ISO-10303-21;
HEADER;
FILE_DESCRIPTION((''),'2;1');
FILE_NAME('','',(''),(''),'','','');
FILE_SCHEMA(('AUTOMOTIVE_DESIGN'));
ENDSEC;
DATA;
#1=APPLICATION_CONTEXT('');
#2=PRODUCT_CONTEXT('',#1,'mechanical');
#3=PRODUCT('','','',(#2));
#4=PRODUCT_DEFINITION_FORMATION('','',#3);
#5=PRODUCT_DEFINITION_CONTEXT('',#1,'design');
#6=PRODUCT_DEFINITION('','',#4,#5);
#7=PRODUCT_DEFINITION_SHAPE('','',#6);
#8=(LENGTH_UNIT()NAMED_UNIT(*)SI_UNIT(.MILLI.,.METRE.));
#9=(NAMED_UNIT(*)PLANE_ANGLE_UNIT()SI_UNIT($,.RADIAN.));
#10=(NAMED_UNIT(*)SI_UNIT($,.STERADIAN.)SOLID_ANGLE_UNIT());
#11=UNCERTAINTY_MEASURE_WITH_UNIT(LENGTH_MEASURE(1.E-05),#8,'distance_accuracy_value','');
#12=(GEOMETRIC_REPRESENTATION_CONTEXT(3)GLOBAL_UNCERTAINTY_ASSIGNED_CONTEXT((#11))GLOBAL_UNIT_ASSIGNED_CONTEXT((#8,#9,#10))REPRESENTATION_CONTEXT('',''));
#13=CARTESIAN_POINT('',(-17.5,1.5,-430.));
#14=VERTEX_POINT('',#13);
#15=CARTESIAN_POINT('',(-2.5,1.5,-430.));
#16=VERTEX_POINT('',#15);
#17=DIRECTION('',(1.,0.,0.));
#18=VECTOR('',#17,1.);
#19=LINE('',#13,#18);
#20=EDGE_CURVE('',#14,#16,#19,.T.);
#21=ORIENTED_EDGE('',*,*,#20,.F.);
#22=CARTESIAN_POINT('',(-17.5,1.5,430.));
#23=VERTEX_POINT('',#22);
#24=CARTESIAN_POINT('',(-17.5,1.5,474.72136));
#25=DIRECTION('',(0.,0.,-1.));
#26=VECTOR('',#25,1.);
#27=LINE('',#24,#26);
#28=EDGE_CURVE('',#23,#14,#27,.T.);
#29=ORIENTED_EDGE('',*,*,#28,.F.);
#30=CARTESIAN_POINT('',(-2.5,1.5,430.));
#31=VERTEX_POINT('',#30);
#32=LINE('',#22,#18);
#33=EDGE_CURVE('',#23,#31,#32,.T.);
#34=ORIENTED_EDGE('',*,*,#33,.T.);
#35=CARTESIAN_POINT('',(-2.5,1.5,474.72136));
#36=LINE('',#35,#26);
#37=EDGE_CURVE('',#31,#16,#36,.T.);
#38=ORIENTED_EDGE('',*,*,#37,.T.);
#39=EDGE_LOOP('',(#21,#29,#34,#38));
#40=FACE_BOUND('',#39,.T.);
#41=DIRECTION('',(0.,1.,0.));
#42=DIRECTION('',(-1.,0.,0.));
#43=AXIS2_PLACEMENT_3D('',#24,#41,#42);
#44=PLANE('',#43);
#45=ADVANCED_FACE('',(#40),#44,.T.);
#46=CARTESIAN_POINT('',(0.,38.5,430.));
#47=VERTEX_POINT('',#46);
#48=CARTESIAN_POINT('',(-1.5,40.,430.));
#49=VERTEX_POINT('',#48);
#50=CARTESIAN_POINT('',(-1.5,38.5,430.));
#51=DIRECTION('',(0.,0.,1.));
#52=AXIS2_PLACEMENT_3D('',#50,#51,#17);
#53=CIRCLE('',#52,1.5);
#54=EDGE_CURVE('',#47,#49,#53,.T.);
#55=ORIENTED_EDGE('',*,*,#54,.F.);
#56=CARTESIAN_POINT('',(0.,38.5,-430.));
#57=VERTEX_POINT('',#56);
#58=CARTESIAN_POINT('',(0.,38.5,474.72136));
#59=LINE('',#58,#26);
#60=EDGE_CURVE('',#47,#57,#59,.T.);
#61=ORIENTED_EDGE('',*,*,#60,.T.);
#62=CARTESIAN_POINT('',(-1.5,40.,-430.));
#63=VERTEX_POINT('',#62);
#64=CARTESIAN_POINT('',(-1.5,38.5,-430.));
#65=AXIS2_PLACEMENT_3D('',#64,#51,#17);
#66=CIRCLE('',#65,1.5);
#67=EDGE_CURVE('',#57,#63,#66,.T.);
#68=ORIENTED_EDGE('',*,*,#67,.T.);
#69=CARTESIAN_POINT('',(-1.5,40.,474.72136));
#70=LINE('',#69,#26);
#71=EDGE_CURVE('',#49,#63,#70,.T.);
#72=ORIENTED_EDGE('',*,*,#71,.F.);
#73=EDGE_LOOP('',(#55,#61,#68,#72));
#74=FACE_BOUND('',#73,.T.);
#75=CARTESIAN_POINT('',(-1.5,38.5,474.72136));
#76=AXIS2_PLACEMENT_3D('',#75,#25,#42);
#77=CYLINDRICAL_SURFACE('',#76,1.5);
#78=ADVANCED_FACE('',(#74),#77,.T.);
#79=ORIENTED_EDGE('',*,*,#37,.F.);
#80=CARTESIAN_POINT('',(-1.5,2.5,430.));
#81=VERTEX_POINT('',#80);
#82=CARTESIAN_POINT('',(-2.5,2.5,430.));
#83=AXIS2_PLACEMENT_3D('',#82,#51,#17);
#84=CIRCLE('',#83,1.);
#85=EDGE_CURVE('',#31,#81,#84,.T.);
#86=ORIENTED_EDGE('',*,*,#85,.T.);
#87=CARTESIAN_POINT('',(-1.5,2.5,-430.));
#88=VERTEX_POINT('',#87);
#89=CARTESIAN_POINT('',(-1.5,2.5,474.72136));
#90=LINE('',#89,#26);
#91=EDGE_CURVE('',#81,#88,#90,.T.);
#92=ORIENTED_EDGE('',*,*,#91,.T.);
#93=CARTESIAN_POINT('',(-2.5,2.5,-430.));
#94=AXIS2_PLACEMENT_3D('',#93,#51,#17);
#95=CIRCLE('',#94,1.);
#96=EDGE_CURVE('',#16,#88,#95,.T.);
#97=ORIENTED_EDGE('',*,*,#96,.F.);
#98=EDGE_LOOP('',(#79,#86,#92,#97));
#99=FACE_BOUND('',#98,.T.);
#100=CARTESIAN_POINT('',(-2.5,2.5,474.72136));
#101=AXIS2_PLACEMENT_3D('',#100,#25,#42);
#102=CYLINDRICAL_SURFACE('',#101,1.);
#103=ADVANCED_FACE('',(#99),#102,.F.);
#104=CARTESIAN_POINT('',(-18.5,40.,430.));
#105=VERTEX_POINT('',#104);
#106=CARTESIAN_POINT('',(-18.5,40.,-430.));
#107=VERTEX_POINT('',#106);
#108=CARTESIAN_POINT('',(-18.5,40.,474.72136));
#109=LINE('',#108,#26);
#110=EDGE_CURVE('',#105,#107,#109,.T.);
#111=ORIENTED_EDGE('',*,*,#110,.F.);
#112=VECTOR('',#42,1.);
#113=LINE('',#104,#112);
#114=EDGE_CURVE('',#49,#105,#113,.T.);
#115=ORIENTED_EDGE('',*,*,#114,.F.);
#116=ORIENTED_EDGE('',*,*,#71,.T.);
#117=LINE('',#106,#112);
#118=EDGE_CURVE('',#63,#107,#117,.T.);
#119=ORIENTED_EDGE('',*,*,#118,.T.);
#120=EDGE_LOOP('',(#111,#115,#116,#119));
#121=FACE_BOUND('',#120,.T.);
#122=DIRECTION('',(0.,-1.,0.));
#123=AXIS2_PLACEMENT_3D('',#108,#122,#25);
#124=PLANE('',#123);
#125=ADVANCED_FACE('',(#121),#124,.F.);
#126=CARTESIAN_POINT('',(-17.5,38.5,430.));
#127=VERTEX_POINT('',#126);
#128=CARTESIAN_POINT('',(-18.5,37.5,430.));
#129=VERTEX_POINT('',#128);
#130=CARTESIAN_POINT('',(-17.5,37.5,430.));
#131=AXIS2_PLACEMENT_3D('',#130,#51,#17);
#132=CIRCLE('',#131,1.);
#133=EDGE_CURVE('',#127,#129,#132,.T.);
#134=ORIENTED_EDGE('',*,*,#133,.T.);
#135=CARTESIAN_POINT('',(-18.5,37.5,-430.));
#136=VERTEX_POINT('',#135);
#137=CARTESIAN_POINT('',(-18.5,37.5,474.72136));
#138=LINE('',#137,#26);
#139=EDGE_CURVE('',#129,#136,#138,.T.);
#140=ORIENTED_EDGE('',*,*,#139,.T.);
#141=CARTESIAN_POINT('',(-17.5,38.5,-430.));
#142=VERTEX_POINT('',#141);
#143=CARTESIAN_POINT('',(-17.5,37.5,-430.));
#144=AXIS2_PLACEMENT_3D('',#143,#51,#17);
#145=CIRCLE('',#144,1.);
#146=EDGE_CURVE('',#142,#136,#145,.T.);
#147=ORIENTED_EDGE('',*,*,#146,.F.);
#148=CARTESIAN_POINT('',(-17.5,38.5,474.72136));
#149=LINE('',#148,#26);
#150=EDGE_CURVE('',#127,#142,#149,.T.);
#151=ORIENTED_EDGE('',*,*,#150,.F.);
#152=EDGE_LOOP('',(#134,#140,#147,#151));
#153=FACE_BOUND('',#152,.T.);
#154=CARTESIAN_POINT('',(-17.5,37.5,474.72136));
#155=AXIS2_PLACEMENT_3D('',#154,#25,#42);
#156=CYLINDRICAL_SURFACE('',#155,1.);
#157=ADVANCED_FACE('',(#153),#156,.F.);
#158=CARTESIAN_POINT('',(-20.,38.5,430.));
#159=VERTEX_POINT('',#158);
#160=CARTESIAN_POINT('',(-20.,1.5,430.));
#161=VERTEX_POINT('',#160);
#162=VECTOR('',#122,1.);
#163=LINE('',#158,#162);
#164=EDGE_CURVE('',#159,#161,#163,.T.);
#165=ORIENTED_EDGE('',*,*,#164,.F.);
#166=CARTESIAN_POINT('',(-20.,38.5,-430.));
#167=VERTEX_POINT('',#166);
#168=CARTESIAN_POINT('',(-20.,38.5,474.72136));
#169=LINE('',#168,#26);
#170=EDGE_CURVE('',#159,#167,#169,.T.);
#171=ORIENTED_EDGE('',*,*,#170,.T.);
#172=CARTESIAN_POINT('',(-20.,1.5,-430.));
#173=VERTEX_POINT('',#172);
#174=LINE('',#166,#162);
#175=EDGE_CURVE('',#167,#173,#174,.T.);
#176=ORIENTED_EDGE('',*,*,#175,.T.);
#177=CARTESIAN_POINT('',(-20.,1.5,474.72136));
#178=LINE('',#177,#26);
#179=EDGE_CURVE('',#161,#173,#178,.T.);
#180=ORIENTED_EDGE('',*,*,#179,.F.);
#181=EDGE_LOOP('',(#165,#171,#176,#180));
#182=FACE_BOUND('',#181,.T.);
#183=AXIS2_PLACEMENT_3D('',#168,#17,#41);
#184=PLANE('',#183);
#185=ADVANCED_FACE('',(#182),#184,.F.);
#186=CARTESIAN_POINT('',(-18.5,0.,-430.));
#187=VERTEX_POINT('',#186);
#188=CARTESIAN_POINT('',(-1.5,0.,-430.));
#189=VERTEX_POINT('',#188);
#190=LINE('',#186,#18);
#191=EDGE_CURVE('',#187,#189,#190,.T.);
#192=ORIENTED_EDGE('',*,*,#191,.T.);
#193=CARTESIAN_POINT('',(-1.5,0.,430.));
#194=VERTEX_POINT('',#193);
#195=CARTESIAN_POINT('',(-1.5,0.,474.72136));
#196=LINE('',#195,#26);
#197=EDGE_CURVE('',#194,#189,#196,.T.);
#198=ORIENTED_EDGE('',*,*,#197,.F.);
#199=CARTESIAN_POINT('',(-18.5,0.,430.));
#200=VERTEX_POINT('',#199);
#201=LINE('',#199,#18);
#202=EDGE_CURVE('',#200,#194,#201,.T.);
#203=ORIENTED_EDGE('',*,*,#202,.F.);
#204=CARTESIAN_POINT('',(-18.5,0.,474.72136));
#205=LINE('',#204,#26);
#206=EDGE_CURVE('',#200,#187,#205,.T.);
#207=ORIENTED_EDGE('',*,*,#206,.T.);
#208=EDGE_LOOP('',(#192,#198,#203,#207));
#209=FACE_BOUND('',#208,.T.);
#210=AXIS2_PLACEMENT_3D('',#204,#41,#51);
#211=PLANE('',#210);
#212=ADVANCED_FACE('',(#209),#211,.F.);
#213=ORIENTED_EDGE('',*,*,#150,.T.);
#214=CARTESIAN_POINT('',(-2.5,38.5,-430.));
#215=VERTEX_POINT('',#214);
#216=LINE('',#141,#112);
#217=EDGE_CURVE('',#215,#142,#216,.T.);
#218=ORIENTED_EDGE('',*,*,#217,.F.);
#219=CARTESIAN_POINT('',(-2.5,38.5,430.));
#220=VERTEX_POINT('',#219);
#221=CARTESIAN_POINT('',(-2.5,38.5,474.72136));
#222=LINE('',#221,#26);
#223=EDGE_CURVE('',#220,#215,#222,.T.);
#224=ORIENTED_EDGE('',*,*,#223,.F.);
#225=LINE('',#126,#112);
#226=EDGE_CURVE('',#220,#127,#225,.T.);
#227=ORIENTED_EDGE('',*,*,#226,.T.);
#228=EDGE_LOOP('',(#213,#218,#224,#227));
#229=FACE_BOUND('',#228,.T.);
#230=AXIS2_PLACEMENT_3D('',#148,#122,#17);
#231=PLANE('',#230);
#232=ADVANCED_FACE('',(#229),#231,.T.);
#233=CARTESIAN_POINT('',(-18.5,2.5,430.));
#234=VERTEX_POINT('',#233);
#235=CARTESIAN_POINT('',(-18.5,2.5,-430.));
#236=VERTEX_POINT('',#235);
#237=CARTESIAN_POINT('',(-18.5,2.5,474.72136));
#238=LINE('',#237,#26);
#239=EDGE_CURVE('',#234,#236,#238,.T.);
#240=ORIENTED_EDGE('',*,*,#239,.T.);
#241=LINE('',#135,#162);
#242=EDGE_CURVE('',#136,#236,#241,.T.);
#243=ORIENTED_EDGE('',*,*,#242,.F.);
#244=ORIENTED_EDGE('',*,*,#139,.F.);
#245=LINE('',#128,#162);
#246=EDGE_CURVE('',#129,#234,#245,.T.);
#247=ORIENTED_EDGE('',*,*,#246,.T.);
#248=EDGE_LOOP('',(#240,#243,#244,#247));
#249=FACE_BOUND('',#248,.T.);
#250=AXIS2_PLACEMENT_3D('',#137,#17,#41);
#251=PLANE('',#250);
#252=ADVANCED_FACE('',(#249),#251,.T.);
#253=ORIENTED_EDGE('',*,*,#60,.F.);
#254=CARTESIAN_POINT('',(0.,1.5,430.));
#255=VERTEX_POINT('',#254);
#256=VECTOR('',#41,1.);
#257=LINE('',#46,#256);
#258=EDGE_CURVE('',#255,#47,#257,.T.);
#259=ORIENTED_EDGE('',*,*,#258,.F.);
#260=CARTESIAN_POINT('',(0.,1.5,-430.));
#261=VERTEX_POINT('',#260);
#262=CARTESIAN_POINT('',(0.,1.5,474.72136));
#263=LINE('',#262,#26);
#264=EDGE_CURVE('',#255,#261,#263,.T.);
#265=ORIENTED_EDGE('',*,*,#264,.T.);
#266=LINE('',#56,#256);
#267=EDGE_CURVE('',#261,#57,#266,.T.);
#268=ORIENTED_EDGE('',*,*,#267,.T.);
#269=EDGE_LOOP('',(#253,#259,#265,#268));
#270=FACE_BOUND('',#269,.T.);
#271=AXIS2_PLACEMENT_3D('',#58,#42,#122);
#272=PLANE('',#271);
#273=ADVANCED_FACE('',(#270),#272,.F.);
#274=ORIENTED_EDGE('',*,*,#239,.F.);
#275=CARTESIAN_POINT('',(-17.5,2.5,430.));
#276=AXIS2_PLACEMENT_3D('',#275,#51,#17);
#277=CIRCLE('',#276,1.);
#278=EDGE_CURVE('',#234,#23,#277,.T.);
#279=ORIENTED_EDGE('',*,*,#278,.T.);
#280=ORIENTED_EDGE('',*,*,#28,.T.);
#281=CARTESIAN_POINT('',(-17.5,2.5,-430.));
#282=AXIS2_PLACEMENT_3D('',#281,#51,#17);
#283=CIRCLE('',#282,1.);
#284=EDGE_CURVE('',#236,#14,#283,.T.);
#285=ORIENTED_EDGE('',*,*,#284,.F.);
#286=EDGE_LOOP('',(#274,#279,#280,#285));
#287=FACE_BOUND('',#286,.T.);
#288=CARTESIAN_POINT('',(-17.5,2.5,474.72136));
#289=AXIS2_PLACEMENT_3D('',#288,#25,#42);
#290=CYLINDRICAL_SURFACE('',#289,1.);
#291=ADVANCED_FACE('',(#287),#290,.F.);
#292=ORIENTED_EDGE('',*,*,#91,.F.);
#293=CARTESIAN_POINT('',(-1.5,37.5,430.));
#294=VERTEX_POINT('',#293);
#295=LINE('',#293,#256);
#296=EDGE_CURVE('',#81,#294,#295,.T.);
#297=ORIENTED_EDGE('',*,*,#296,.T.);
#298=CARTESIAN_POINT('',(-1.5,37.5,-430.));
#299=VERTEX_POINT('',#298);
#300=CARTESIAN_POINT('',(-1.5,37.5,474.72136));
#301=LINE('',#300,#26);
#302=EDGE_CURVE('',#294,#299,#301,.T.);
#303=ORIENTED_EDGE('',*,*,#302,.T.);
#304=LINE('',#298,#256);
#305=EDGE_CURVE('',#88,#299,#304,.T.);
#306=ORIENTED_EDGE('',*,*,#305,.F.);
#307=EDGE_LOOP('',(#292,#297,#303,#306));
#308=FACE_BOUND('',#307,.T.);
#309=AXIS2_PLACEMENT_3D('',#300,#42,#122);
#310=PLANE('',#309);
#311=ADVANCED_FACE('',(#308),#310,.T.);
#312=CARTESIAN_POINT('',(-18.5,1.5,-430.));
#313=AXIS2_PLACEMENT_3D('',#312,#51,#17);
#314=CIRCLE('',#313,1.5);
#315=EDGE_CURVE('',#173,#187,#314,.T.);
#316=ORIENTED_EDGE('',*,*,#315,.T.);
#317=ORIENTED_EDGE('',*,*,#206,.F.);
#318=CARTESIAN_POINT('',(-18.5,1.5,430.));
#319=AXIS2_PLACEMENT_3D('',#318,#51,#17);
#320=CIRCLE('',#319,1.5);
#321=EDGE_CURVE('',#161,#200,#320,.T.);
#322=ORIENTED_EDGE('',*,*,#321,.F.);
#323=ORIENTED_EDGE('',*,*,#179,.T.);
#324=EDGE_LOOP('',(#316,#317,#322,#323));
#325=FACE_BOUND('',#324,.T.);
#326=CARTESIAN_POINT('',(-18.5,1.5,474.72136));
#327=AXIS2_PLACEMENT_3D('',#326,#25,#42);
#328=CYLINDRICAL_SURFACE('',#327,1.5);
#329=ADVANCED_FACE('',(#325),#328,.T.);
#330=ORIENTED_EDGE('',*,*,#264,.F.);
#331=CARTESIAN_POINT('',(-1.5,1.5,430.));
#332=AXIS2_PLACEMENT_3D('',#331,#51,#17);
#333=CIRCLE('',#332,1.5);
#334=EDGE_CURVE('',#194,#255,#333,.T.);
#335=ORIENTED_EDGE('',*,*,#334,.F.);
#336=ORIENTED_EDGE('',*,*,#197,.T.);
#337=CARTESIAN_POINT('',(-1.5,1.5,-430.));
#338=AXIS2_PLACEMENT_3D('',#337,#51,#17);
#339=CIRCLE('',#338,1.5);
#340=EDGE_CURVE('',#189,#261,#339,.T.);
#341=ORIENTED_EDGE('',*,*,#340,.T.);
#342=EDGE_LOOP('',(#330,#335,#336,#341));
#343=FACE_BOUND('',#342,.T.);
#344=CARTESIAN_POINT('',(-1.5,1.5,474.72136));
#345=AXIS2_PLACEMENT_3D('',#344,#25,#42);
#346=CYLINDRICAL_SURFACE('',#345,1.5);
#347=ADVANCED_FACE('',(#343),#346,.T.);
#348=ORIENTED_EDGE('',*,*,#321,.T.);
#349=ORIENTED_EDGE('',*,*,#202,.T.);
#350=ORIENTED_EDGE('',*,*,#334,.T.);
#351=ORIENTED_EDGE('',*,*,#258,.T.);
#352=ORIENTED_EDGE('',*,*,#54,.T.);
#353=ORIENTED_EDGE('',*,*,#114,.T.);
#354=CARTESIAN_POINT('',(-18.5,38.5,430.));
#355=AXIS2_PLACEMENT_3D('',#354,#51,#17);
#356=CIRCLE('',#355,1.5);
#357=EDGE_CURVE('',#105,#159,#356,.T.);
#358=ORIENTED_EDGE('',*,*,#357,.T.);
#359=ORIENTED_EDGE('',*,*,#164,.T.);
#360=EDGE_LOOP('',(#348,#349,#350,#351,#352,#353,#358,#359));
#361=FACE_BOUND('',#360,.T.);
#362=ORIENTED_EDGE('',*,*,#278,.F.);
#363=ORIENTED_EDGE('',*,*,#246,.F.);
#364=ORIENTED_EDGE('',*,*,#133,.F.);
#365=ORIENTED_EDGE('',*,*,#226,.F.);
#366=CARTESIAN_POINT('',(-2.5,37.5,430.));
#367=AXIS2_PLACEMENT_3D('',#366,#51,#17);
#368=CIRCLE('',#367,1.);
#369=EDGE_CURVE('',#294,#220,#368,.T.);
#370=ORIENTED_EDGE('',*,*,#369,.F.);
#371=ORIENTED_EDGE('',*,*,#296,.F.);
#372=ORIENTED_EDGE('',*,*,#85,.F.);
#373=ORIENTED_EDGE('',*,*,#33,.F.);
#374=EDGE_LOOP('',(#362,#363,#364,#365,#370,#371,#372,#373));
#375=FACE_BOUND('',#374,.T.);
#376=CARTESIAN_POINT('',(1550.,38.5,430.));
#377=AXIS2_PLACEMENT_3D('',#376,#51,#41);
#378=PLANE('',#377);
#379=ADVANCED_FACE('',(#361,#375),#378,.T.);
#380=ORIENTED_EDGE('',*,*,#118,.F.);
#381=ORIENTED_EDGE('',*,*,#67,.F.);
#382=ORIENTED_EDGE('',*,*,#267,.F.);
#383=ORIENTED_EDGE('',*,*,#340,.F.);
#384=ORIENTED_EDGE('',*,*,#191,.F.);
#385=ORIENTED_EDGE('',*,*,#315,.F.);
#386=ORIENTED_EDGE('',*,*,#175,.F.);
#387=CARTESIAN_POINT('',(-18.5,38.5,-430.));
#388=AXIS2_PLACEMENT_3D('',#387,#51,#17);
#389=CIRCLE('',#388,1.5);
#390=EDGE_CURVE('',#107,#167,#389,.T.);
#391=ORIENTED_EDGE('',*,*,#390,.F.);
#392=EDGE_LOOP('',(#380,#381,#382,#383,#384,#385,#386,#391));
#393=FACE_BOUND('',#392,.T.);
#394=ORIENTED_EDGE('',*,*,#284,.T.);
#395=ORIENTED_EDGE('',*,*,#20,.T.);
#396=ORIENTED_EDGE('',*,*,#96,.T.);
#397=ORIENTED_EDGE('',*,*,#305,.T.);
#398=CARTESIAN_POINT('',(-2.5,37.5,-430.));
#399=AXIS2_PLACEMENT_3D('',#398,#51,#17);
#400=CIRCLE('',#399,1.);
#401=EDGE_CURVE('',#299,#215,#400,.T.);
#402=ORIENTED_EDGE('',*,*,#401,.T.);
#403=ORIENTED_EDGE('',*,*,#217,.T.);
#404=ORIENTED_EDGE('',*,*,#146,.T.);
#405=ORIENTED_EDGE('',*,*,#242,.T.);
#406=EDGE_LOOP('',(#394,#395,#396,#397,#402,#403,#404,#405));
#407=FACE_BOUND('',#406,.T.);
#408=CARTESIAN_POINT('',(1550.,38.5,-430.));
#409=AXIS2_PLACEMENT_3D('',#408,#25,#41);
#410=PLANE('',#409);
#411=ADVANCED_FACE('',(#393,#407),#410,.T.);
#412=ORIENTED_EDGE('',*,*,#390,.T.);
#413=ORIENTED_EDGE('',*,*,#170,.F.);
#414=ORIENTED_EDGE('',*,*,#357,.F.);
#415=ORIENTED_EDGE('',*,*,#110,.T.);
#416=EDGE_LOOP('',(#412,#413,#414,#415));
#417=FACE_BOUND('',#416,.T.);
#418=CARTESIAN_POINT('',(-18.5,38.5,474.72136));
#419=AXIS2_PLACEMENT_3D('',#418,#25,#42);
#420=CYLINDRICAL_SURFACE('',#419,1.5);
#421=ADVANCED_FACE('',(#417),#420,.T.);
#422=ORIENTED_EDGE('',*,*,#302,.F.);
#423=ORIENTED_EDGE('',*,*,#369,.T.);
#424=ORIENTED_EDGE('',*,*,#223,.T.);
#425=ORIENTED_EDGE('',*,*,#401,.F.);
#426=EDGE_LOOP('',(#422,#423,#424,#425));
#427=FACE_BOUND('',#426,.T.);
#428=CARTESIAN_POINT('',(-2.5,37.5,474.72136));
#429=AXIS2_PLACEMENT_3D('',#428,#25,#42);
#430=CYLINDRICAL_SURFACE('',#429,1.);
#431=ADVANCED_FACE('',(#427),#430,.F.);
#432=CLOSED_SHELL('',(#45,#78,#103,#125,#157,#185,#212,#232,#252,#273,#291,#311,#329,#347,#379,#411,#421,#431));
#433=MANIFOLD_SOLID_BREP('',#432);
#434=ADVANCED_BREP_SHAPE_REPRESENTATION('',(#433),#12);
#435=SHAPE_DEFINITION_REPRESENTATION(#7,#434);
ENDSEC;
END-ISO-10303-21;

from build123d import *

# Parameters (mm, degrees)
EXTRUDE_1_DEPTH = 430


# Read off the part's stored shape, not the designer's step: Бобышка-Вытянуть1
with BuildPart() as part:
    # Бобышка-Вытянуть1 outline → Бобышка-Вытянуть1 (new body)
    with BuildSketch(Plane.XY):
        with BuildLine():
            Line((0, 1.5), (0, 38.5))
            ThreePointArc((0, 38.5), (-0.439339828, 39.560660172), (-1.5, 40))
            Line((-1.5, 40), (-18.5, 40))
            ThreePointArc((-18.5, 40), (-19.560660172, 39.560660172), (-20, 38.5))
            Line((-20, 38.5), (-20, 1.5))
            ThreePointArc((-20, 1.5), (-19.560660172, 0.439339828), (-18.5, 0))
            Line((-18.5, 0), (-1.5, 0))
            ThreePointArc((-1.5, 0), (-0.439339828, 0.439339828), (0, 1.5))
        make_face()
        with BuildLine():
            ThreePointArc((-1.5, 2.5), (-1.792893219, 1.792893219), (-2.5, 1.5))
            Line((-2.5, 1.5), (-17.5, 1.5))
            ThreePointArc((-17.5, 1.5), (-18.207106781, 1.792893219), (-18.5, 2.5))
            Line((-18.5, 2.5), (-18.5, 37.5))
            ThreePointArc((-18.5, 37.5), (-18.207106781, 38.207106781), (-17.5, 38.5))
            Line((-17.5, 38.5), (-2.5, 38.5))
            ThreePointArc((-2.5, 38.5), (-1.792893219, 38.207106781), (-1.5, 37.5))
            Line((-1.5, 37.5), (-1.5, 2.5))
        make_face(mode=Mode.SUBTRACT)
    extrude(amount=EXTRUDE_1_DEPTH)

    # Зеркальное отражение1: part across plane


with BuildPart() as part_1:
    add(part.part)
    add(part.part.mirror(Plane(origin=(-1.5, 38.5, 0), x_dir=(1, 0, 0), z_dir=(0, 0, -1))))


solid = part_1.part
